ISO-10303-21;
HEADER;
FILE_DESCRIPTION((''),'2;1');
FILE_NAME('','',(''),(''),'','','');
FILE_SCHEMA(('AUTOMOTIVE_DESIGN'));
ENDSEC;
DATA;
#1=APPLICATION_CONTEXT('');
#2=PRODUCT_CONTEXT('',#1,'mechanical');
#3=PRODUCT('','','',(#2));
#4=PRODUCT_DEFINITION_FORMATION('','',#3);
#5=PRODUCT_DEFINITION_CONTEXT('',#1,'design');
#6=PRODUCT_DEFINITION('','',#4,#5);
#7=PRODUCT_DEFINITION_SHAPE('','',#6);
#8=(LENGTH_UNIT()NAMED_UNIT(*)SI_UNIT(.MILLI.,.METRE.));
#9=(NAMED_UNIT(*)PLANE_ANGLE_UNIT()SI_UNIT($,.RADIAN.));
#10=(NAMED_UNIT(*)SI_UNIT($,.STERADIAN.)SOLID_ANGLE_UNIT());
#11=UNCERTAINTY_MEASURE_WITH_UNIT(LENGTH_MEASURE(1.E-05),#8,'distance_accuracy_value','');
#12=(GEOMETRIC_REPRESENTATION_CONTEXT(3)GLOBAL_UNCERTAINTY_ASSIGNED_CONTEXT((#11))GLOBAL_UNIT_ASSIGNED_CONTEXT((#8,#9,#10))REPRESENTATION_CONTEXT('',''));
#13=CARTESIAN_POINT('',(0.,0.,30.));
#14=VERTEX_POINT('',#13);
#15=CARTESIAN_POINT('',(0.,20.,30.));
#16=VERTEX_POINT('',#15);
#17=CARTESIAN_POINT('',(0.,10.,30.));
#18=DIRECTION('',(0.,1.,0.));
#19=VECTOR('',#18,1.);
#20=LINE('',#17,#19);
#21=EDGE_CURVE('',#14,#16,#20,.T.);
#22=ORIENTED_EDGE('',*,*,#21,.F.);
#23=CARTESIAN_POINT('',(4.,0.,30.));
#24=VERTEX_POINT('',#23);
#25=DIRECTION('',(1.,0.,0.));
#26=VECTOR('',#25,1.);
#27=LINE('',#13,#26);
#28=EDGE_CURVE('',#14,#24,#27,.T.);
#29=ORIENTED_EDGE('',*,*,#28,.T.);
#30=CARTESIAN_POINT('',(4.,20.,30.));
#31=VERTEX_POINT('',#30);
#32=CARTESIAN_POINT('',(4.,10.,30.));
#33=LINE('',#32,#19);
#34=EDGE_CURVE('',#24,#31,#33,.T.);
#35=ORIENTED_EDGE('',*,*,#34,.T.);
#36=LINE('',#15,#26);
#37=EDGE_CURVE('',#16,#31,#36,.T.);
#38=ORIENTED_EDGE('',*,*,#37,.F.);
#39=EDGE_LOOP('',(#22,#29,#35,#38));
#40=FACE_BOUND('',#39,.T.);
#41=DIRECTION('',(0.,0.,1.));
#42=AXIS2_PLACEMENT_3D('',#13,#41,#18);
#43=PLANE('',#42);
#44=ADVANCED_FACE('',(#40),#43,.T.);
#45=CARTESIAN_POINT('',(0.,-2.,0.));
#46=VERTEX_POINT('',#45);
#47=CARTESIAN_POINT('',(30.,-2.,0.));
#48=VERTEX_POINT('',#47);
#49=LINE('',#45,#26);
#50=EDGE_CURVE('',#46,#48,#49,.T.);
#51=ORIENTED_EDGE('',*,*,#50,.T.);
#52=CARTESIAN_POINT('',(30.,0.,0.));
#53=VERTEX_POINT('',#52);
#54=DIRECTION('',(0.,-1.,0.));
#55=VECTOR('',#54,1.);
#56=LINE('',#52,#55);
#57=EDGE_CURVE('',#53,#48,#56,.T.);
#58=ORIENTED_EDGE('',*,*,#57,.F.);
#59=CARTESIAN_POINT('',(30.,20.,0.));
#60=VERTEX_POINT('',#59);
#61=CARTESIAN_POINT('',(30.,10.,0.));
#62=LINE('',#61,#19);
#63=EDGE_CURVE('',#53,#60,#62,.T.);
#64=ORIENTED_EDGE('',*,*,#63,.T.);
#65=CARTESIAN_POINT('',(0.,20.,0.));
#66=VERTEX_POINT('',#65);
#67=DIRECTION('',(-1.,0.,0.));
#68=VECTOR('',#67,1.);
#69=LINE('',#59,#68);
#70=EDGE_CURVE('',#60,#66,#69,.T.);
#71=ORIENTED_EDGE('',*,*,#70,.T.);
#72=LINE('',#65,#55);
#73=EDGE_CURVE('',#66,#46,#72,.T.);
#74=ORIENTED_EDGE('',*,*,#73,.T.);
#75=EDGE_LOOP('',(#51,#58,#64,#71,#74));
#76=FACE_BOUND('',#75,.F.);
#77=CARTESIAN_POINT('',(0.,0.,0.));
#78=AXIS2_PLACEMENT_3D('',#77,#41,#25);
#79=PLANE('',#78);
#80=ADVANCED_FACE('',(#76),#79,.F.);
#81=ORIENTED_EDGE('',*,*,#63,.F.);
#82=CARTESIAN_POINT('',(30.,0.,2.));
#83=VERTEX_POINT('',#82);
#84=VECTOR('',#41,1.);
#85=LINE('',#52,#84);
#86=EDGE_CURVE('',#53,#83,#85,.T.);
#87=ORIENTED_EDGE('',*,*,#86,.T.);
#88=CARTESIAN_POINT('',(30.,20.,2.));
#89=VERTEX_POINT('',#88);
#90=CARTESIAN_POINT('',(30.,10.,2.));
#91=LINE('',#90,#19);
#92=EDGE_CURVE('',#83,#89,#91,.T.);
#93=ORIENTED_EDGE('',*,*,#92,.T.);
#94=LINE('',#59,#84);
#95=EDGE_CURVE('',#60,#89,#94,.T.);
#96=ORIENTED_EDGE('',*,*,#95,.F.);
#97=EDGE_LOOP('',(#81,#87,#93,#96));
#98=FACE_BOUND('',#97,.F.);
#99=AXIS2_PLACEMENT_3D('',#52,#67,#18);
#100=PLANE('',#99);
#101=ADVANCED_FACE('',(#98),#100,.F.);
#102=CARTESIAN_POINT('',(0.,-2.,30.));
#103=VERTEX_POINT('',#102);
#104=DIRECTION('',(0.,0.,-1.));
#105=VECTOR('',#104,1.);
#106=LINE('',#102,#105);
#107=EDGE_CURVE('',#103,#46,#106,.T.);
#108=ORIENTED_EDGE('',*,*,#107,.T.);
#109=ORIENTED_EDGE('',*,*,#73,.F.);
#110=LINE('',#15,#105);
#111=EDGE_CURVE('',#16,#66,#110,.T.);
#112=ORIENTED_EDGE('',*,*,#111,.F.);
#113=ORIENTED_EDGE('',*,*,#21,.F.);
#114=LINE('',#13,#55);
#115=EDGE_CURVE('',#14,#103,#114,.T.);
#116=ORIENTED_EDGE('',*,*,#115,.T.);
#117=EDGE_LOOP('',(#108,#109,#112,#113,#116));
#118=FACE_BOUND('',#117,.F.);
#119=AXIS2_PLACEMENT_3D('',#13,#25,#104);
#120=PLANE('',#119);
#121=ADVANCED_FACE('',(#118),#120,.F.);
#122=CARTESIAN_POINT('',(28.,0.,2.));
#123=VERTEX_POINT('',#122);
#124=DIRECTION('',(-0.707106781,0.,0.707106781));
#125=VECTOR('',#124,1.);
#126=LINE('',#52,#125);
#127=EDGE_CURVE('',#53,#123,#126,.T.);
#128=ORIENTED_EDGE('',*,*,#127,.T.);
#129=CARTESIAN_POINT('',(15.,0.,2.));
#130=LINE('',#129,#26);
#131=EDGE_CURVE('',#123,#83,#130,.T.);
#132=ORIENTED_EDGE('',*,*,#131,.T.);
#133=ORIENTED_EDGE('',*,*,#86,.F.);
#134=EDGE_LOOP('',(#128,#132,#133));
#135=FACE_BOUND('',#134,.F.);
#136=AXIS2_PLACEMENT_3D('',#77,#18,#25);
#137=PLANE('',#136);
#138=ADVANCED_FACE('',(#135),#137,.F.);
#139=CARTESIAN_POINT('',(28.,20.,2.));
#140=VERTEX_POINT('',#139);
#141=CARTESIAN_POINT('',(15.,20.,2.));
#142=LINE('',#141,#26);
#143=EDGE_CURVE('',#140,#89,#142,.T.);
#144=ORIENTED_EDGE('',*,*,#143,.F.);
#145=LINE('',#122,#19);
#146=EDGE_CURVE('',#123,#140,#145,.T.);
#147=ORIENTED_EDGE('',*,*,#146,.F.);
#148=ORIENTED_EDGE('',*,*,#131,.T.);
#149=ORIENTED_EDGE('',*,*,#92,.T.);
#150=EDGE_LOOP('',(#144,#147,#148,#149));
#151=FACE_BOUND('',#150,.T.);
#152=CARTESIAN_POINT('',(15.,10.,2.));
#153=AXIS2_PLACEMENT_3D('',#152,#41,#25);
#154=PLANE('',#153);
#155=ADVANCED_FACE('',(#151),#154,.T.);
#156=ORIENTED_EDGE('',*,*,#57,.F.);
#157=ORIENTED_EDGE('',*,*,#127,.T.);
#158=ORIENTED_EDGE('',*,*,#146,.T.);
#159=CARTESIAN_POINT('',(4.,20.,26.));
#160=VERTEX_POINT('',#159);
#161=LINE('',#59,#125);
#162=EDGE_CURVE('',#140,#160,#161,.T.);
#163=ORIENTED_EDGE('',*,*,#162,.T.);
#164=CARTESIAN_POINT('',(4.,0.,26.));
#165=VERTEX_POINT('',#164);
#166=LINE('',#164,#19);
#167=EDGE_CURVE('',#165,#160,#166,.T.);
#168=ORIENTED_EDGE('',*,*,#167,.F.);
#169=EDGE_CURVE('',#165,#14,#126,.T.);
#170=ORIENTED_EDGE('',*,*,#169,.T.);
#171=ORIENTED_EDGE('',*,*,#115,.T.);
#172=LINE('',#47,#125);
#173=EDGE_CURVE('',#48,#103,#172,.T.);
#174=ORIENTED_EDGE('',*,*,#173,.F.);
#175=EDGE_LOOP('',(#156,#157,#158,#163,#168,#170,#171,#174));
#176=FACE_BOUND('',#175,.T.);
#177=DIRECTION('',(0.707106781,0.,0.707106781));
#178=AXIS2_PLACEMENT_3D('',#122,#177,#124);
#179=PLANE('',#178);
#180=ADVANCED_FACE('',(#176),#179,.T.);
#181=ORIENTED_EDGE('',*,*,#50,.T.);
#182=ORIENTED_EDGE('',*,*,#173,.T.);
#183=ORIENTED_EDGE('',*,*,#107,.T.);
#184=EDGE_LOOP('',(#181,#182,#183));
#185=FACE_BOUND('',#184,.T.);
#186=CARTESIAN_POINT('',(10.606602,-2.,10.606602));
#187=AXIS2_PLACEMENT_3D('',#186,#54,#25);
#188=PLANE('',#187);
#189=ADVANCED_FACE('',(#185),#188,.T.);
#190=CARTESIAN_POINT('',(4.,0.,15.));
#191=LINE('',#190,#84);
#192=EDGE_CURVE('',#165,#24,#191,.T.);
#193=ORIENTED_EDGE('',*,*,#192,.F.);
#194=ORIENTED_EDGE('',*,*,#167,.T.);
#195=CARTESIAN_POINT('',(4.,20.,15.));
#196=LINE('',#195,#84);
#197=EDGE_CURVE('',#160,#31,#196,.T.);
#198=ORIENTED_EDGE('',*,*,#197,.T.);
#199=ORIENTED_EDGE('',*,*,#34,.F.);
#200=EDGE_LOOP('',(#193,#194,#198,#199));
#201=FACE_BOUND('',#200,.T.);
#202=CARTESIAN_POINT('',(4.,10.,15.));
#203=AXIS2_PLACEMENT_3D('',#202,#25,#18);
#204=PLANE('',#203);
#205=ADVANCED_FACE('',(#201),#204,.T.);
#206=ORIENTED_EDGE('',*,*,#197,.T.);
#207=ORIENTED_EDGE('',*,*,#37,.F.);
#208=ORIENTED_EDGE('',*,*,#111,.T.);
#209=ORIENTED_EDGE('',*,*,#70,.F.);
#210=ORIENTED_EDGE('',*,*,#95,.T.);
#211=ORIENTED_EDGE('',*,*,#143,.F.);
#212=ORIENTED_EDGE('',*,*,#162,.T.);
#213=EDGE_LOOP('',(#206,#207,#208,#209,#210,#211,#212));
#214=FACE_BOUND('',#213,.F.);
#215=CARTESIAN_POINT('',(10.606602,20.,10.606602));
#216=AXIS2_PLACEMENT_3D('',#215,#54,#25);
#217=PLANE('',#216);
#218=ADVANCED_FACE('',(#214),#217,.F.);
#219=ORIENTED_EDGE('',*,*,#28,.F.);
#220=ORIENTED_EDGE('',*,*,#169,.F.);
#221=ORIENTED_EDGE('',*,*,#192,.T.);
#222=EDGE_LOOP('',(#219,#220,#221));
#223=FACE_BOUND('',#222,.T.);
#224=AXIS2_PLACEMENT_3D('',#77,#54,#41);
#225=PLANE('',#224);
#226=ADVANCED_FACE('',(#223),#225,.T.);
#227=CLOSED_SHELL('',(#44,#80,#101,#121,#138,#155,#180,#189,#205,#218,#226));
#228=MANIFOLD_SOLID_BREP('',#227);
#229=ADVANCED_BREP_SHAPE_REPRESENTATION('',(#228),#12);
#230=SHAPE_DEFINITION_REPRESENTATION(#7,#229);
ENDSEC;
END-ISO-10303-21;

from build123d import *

# Parameters (mm, degrees)
F1_W     = 20
F1_H     = 30
F2_DEPTH = 4
F4_DEPTH = 2
F5_E7_W  = 30
F5_E7_H  = 20
F6_DEPTH = 2
F7_DEPTH = 20


with BuildPart() as f2:
    # F1 (on Right) → F2 (new body)
    with BuildSketch(Plane.YZ):
        with Locations((10, 15)):
            Rectangle(F1_W, F1_H)
    extrude(amount=F2_DEPTH)

    # F0 (on Front) → F4 (join)
    with BuildSketch(Plane.XZ):
        Polygon((0, 30), (0, 0), (30, 0), align=None)
    extrude(amount=F4_DEPTH)

    # F5_E7 (on explicit) → F6 (join)
    with BuildSketch(Plane.XY):
        with Locations((15, 10)):
            Rectangle(F5_E7_W, F5_E7_H)
    extrude(amount=F6_DEPTH)

    # F7 (add): a face of the model
    f7_faces = [f2.faces().sort_by_distance(p)[0] for p in [
        (12, 0, 10),
    ]]
    extrude(f7_faces, amount=F7_DEPTH)


solid = f2.part
